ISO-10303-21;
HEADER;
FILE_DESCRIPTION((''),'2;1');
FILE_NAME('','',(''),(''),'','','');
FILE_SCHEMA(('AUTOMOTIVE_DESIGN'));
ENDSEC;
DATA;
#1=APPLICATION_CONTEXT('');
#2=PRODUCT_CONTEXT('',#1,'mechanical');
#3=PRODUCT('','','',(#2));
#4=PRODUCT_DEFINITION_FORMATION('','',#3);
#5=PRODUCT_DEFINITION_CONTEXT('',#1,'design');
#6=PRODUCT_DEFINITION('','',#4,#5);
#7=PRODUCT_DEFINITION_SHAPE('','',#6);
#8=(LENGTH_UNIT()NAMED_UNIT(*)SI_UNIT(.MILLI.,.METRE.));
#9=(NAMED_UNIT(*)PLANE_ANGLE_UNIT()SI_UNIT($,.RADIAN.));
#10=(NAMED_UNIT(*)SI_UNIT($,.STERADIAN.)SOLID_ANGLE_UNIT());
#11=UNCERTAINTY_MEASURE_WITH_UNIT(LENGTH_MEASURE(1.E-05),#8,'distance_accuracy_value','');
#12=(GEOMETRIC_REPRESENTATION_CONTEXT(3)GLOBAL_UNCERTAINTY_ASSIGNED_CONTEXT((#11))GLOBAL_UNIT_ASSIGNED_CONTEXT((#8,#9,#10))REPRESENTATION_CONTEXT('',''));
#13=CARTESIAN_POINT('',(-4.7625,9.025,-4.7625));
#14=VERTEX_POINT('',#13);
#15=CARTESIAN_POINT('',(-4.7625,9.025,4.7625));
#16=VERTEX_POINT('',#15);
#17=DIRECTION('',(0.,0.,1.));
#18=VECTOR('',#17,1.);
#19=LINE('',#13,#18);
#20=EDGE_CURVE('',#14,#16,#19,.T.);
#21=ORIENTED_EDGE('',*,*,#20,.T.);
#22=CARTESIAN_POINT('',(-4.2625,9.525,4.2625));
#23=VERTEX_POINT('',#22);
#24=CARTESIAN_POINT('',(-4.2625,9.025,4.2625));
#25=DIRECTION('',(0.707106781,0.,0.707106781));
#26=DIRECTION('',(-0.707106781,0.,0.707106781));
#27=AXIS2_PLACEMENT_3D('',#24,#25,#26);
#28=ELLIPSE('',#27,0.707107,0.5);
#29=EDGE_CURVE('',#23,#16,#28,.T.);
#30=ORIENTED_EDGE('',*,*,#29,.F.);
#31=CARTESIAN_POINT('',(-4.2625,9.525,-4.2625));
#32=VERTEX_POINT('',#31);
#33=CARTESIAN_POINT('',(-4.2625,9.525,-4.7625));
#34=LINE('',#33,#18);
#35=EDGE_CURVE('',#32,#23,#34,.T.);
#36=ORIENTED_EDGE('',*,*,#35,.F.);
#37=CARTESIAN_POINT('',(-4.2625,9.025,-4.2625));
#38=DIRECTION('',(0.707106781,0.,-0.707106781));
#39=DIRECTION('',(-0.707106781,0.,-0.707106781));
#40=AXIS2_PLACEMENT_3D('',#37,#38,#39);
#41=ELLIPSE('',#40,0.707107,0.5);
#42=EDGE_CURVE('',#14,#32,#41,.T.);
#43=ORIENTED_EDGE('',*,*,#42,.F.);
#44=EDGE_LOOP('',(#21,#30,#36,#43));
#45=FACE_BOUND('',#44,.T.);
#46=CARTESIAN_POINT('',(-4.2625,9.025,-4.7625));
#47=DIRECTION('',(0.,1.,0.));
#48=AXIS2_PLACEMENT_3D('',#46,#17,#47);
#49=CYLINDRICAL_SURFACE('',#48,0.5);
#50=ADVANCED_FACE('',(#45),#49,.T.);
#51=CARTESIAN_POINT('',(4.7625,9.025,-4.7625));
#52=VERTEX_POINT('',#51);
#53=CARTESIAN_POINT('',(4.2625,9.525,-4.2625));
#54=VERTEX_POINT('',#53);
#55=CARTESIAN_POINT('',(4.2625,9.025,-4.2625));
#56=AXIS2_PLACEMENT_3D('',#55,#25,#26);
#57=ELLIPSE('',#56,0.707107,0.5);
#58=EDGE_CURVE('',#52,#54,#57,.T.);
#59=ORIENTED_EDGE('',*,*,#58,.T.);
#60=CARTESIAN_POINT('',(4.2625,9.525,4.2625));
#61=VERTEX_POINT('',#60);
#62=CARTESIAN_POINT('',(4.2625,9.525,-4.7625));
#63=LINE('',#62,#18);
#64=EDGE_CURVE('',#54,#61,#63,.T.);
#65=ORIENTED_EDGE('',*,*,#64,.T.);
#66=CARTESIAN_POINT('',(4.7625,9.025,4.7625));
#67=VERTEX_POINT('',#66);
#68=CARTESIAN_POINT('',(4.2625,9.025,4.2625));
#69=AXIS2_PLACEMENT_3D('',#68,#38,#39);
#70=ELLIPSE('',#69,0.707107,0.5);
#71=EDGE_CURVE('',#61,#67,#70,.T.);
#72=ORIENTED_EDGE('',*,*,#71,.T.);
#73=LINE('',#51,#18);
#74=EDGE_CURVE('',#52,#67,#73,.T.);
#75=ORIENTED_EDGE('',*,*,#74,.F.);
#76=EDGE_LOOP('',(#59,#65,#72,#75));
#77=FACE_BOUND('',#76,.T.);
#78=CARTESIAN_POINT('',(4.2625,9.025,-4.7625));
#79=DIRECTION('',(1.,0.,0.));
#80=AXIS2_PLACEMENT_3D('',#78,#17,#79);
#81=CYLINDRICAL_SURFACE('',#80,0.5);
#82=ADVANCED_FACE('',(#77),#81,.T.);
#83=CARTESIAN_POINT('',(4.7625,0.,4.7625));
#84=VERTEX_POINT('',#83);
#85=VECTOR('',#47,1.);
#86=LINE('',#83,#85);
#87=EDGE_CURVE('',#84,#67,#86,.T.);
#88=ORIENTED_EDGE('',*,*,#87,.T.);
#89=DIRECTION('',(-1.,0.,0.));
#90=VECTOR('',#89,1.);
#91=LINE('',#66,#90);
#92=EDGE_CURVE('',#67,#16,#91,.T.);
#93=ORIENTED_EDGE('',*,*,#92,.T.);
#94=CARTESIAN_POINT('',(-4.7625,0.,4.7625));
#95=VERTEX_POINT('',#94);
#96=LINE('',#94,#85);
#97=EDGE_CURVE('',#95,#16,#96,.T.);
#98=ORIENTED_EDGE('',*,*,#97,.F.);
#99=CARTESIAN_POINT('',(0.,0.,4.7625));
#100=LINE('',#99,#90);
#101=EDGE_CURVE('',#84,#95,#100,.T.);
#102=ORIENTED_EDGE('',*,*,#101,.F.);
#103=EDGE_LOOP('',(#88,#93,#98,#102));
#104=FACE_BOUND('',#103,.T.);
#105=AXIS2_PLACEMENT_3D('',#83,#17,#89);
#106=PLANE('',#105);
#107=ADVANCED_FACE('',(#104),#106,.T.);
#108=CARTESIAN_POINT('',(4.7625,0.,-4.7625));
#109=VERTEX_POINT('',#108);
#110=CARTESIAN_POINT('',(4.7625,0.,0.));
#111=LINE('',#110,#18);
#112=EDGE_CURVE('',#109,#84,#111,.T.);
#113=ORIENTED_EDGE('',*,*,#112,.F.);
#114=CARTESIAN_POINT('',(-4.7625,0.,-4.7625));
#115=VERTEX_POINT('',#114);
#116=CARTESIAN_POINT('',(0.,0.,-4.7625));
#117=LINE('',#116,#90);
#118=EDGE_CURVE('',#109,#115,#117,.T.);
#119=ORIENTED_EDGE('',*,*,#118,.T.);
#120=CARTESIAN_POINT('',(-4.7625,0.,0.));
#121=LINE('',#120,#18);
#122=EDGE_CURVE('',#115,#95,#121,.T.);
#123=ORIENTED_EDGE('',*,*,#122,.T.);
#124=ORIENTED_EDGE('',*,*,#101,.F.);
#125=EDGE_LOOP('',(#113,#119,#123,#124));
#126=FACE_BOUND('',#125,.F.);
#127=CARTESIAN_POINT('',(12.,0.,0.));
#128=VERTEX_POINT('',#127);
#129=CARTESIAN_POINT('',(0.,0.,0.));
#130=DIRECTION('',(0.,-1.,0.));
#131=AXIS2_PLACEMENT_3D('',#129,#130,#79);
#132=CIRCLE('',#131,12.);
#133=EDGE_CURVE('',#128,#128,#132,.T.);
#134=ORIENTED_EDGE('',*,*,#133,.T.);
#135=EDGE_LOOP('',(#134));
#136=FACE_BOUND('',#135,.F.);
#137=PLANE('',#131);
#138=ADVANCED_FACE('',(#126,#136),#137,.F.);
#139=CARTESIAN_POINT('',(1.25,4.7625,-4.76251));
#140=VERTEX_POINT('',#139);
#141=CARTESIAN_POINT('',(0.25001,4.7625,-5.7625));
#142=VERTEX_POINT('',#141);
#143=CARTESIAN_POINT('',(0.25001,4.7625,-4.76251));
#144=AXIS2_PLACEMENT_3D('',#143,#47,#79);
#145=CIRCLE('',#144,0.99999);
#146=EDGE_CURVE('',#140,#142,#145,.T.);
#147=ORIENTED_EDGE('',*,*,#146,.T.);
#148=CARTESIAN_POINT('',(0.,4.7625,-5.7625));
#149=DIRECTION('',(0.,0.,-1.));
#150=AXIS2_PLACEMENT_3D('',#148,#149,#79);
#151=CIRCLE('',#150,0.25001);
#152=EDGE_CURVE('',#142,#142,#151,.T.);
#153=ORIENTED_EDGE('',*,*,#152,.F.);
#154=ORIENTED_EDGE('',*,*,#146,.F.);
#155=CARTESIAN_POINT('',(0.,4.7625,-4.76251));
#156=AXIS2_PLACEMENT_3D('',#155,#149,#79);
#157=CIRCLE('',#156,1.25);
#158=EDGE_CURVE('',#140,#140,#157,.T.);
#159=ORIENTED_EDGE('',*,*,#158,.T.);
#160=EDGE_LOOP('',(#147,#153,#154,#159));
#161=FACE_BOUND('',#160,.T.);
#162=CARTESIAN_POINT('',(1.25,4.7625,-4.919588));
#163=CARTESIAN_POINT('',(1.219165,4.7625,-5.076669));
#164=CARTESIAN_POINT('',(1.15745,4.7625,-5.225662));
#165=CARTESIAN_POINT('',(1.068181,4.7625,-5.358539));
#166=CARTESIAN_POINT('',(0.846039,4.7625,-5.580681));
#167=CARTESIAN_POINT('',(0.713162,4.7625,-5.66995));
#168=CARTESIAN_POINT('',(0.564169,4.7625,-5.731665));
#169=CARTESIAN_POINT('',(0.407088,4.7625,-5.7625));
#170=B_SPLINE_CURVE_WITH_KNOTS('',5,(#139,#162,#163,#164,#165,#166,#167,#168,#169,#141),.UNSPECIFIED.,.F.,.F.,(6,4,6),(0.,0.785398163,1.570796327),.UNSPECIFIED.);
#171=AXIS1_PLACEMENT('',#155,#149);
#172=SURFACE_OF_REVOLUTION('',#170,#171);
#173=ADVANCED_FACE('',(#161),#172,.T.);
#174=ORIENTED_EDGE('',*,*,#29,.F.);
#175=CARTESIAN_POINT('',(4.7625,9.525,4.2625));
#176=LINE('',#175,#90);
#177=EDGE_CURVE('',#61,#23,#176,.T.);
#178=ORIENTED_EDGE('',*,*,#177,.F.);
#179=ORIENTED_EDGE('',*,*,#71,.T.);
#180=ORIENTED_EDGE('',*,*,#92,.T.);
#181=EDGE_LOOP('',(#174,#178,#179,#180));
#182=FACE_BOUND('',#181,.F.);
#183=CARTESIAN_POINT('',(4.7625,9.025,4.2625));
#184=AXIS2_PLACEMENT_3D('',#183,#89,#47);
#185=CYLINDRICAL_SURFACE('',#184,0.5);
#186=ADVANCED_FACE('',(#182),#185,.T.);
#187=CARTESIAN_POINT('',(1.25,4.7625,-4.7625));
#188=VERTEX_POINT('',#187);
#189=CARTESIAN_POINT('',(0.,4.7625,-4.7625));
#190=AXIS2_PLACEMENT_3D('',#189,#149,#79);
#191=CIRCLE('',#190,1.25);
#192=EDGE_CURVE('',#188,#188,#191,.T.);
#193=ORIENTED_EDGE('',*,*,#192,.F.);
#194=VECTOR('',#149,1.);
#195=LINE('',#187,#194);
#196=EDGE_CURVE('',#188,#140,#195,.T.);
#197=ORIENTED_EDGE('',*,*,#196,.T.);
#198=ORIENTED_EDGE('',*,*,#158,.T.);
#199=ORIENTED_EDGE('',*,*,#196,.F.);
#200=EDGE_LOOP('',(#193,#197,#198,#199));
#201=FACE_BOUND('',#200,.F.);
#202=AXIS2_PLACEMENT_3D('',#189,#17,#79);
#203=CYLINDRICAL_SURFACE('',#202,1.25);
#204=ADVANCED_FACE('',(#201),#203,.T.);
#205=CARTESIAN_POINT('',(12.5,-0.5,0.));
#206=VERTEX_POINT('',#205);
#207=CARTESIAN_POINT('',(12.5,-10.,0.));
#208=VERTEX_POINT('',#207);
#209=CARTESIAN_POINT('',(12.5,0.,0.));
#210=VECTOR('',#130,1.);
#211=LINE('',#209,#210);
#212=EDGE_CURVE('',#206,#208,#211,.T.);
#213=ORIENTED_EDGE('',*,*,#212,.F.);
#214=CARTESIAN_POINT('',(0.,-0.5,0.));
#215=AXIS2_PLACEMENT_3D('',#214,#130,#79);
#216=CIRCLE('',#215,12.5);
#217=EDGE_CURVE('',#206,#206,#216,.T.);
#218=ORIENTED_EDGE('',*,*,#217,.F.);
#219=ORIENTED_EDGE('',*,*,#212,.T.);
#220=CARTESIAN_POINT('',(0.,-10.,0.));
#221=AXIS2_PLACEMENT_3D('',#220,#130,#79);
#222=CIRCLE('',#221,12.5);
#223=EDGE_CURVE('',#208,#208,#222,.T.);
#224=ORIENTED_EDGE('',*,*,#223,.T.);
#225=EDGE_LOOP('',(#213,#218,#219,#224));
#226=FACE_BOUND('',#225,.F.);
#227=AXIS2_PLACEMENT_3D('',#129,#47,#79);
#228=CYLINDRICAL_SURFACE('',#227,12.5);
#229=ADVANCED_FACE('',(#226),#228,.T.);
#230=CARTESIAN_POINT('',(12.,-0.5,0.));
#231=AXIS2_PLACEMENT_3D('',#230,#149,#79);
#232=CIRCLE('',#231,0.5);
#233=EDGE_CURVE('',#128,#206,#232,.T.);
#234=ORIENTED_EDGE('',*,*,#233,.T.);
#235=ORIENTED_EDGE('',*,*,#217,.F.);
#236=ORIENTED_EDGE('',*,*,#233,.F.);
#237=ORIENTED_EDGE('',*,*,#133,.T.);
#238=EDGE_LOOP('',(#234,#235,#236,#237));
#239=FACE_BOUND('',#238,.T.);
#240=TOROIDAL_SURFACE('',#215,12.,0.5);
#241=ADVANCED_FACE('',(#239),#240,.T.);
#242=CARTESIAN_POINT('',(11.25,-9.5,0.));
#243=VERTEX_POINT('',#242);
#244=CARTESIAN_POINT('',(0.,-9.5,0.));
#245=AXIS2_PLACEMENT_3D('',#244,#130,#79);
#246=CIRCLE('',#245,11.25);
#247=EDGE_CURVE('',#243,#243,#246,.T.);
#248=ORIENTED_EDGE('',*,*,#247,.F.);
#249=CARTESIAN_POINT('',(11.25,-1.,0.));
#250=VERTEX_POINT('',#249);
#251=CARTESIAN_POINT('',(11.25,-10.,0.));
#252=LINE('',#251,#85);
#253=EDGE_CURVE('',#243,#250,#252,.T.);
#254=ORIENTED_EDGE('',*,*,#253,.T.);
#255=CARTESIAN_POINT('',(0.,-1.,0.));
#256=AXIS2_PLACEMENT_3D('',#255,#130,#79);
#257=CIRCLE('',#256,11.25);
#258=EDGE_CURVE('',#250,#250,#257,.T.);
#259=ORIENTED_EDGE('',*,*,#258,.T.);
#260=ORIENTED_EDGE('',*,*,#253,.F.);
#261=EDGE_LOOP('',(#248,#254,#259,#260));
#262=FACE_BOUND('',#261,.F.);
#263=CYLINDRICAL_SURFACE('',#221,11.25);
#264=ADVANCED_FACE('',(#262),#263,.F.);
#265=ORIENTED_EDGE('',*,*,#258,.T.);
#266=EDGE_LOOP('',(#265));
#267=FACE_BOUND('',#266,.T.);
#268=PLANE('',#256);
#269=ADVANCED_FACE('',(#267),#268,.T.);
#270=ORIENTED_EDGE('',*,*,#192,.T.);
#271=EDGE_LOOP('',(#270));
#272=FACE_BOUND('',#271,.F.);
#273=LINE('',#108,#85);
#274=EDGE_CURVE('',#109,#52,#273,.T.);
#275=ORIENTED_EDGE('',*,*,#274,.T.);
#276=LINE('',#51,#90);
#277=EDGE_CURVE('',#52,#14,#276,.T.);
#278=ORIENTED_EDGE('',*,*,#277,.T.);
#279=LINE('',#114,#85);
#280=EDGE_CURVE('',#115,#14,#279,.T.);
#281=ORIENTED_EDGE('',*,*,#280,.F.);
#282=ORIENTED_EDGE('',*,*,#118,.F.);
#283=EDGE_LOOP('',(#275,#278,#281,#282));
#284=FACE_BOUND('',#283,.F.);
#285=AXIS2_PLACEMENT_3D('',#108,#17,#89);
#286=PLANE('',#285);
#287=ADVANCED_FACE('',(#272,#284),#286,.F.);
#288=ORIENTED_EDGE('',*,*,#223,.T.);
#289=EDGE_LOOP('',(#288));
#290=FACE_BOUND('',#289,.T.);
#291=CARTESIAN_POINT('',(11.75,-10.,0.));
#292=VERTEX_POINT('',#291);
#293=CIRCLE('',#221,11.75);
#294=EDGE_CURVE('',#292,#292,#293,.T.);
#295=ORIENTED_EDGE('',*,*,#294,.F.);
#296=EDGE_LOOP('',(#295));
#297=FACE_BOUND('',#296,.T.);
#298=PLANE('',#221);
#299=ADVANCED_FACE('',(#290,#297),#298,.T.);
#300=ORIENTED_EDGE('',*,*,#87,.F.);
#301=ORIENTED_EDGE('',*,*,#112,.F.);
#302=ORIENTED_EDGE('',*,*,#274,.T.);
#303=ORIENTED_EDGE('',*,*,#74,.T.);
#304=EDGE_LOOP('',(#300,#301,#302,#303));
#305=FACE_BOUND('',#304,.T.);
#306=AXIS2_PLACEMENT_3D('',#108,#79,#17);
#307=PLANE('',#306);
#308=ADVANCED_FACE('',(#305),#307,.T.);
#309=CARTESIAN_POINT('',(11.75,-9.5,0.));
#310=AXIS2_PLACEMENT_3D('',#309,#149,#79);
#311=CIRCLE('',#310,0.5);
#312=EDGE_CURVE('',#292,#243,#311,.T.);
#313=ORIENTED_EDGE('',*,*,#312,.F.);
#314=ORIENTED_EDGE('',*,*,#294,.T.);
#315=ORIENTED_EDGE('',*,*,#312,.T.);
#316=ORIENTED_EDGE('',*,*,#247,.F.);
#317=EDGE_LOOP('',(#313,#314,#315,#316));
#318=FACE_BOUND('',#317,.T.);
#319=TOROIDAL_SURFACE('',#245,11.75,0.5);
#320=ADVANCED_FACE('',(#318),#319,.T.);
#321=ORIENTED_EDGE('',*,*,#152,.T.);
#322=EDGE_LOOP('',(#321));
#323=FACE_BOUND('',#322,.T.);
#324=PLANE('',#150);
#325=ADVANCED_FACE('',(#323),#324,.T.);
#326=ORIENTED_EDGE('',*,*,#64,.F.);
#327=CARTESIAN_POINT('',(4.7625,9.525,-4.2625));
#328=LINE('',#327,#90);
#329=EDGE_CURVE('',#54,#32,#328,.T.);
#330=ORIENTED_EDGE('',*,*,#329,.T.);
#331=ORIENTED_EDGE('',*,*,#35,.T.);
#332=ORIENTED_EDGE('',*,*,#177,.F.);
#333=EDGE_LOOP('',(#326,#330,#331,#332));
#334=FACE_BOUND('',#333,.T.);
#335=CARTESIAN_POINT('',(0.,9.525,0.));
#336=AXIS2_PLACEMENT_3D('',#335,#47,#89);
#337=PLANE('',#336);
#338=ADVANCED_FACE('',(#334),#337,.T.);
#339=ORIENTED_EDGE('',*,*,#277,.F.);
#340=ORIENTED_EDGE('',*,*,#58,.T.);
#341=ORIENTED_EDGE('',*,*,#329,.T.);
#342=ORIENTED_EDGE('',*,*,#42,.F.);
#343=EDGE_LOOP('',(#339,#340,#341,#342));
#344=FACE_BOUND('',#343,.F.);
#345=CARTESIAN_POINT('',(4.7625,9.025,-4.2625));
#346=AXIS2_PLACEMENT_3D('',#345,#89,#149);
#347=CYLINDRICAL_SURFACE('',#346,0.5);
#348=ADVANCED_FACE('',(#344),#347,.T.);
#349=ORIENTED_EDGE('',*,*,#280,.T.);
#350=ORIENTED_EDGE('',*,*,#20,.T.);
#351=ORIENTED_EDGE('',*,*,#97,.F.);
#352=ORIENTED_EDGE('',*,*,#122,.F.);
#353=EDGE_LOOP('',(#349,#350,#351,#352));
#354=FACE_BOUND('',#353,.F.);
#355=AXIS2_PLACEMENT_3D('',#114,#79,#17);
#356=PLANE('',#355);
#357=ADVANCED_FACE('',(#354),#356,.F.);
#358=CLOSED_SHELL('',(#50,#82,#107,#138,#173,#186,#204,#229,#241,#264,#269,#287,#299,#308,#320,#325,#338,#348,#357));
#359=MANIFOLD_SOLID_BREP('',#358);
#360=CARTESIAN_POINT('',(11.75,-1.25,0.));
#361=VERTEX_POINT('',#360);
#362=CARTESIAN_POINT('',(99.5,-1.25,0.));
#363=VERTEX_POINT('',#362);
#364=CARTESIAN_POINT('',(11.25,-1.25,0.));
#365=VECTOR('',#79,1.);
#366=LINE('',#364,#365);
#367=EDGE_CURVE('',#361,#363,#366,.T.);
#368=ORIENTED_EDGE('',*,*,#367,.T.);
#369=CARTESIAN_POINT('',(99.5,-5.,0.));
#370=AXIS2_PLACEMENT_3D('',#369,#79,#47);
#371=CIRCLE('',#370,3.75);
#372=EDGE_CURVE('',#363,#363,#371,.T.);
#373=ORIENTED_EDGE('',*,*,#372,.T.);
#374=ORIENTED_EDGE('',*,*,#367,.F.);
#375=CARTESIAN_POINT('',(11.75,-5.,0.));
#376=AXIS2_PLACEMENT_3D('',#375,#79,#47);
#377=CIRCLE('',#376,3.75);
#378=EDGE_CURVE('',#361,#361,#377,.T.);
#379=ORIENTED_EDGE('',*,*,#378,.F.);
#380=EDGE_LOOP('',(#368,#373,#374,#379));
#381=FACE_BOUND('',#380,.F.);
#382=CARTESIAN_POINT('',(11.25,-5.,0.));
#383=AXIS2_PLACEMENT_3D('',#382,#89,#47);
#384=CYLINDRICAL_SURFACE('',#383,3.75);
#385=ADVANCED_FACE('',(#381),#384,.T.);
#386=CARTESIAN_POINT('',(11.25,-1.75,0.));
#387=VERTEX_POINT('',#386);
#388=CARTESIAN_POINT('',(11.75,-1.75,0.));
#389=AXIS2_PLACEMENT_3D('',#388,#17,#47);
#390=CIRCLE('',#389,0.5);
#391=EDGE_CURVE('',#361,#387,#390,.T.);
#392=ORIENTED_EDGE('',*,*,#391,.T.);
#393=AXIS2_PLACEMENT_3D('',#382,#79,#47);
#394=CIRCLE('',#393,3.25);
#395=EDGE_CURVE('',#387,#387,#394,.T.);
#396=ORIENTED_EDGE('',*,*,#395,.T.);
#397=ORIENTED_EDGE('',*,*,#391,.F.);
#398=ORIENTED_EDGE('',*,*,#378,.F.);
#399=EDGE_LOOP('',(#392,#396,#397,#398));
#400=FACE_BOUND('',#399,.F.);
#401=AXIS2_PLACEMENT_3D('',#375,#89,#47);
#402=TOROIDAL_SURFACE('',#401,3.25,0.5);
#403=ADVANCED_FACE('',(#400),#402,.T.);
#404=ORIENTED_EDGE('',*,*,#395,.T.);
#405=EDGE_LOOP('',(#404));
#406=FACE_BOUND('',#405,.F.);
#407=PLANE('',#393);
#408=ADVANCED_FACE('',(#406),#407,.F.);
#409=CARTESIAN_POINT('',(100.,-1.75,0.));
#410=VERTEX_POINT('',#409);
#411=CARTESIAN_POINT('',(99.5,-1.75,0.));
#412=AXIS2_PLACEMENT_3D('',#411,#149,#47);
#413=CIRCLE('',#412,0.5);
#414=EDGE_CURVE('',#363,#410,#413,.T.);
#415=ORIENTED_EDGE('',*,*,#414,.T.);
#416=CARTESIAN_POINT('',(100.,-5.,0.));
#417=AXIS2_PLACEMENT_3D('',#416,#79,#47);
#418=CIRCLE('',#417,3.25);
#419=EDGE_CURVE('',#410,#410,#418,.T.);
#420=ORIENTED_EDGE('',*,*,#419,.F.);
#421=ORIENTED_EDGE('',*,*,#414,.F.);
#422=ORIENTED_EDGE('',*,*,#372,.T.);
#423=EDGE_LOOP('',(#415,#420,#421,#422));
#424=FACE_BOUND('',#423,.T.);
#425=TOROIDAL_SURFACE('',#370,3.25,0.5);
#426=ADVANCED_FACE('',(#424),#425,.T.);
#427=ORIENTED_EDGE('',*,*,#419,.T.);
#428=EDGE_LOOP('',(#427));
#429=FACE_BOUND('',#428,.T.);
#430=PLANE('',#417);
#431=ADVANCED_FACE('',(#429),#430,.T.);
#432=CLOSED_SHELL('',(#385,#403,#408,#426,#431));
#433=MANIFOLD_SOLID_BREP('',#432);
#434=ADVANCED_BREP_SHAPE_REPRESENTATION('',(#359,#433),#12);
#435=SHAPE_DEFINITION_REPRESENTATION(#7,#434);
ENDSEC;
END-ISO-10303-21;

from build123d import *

# Parameters (mm, degrees)
F0_R     = 12.5
F1_DEPTH = 10
F2_R     = 11.25
F3_DEPTH = 9
F4_W     = 9.525
F4_H     = 9.525
F5_DEPTH = 9.525
F7_START = 11.25
F6_R     = 3.75
F7_DEPTH = 88.75
F8_R     = 1.25
F9_DEPTH = 1
F10_R    = 0.99999
F11_R    = 0.5
F11_2_R  = 0.5


# Not quite as in the source:
# - a fillet or chamfer is up to 0.001 mm smaller than in the source, because OpenCascade refuses the exact size


with BuildPart() as f1:
    # F0 (on Front) → F1 (new body)
    with BuildSketch(Plane.XZ):
        Circle(F0_R)
    extrude(amount=F1_DEPTH)

    # F2 (on face) → F3 (cut)
    with BuildSketch(Plane.XZ.offset(10)):
        Circle(F2_R)
    extrude(amount=-F3_DEPTH, mode=Mode.SUBTRACT)

    # F4 (on face) → F5 (join)
    with BuildSketch(Plane(origin=(0, 0, 0), x_dir=(-1, 0, 0), z_dir=(0, 1, 0))):
        Rectangle(F4_W, F4_H)
    extrude(amount=F5_DEPTH)

    # F8 (on face) → F9 (join)
    with BuildSketch(Plane(origin=(0, 0, -4.7625), x_dir=(1, 0, 0), z_dir=(0, 0, -1))):
        with Locations((0, -4.7625)):
            Circle(F8_R)
    extrude(amount=F9_DEPTH)

    # F10 (radius 1 in the source; OpenCascade refuses exactly that, so slightly less here)
    f10_edges = [f1.edges().sort_by_distance(p)[0] for p in [
        (-1.25, 4.7625, -5.7625),
    ]]
    fillet(f10_edges, radius=F10_R)

    # F11
    f11_edges = [f1.edges().sort_by_distance(p)[0] for p in [
        (0, 9.525, -4.7625),
        (-4.7625, 9.525, 0),
        (0, 9.525, 4.7625),
        (4.7625, 9.525, 0),
        (-11.25, -10, 0),
        (-12.5, 0, 0),
    ]]
    fillet(f11_edges, radius=F11_R)


with BuildPart() as f7:
    # F6 (on Right) → F7 (new body)
    with BuildSketch(Plane.YZ.offset(F7_START)):
        with Locations((-5, 0)):
            Circle(F6_R)
    extrude(amount=F7_DEPTH)

    # F11#2
    f11_2_edges = [f7.edges().sort_by_distance(p)[0] for p in [
        (55.625, -1.25, 0),
        (11.25, -8.75, 0),
        (100, -8.75, 0),
    ]]
    fillet(f11_2_edges, radius=F11_2_R)


solid = Compound([f1.part, f7.part])
